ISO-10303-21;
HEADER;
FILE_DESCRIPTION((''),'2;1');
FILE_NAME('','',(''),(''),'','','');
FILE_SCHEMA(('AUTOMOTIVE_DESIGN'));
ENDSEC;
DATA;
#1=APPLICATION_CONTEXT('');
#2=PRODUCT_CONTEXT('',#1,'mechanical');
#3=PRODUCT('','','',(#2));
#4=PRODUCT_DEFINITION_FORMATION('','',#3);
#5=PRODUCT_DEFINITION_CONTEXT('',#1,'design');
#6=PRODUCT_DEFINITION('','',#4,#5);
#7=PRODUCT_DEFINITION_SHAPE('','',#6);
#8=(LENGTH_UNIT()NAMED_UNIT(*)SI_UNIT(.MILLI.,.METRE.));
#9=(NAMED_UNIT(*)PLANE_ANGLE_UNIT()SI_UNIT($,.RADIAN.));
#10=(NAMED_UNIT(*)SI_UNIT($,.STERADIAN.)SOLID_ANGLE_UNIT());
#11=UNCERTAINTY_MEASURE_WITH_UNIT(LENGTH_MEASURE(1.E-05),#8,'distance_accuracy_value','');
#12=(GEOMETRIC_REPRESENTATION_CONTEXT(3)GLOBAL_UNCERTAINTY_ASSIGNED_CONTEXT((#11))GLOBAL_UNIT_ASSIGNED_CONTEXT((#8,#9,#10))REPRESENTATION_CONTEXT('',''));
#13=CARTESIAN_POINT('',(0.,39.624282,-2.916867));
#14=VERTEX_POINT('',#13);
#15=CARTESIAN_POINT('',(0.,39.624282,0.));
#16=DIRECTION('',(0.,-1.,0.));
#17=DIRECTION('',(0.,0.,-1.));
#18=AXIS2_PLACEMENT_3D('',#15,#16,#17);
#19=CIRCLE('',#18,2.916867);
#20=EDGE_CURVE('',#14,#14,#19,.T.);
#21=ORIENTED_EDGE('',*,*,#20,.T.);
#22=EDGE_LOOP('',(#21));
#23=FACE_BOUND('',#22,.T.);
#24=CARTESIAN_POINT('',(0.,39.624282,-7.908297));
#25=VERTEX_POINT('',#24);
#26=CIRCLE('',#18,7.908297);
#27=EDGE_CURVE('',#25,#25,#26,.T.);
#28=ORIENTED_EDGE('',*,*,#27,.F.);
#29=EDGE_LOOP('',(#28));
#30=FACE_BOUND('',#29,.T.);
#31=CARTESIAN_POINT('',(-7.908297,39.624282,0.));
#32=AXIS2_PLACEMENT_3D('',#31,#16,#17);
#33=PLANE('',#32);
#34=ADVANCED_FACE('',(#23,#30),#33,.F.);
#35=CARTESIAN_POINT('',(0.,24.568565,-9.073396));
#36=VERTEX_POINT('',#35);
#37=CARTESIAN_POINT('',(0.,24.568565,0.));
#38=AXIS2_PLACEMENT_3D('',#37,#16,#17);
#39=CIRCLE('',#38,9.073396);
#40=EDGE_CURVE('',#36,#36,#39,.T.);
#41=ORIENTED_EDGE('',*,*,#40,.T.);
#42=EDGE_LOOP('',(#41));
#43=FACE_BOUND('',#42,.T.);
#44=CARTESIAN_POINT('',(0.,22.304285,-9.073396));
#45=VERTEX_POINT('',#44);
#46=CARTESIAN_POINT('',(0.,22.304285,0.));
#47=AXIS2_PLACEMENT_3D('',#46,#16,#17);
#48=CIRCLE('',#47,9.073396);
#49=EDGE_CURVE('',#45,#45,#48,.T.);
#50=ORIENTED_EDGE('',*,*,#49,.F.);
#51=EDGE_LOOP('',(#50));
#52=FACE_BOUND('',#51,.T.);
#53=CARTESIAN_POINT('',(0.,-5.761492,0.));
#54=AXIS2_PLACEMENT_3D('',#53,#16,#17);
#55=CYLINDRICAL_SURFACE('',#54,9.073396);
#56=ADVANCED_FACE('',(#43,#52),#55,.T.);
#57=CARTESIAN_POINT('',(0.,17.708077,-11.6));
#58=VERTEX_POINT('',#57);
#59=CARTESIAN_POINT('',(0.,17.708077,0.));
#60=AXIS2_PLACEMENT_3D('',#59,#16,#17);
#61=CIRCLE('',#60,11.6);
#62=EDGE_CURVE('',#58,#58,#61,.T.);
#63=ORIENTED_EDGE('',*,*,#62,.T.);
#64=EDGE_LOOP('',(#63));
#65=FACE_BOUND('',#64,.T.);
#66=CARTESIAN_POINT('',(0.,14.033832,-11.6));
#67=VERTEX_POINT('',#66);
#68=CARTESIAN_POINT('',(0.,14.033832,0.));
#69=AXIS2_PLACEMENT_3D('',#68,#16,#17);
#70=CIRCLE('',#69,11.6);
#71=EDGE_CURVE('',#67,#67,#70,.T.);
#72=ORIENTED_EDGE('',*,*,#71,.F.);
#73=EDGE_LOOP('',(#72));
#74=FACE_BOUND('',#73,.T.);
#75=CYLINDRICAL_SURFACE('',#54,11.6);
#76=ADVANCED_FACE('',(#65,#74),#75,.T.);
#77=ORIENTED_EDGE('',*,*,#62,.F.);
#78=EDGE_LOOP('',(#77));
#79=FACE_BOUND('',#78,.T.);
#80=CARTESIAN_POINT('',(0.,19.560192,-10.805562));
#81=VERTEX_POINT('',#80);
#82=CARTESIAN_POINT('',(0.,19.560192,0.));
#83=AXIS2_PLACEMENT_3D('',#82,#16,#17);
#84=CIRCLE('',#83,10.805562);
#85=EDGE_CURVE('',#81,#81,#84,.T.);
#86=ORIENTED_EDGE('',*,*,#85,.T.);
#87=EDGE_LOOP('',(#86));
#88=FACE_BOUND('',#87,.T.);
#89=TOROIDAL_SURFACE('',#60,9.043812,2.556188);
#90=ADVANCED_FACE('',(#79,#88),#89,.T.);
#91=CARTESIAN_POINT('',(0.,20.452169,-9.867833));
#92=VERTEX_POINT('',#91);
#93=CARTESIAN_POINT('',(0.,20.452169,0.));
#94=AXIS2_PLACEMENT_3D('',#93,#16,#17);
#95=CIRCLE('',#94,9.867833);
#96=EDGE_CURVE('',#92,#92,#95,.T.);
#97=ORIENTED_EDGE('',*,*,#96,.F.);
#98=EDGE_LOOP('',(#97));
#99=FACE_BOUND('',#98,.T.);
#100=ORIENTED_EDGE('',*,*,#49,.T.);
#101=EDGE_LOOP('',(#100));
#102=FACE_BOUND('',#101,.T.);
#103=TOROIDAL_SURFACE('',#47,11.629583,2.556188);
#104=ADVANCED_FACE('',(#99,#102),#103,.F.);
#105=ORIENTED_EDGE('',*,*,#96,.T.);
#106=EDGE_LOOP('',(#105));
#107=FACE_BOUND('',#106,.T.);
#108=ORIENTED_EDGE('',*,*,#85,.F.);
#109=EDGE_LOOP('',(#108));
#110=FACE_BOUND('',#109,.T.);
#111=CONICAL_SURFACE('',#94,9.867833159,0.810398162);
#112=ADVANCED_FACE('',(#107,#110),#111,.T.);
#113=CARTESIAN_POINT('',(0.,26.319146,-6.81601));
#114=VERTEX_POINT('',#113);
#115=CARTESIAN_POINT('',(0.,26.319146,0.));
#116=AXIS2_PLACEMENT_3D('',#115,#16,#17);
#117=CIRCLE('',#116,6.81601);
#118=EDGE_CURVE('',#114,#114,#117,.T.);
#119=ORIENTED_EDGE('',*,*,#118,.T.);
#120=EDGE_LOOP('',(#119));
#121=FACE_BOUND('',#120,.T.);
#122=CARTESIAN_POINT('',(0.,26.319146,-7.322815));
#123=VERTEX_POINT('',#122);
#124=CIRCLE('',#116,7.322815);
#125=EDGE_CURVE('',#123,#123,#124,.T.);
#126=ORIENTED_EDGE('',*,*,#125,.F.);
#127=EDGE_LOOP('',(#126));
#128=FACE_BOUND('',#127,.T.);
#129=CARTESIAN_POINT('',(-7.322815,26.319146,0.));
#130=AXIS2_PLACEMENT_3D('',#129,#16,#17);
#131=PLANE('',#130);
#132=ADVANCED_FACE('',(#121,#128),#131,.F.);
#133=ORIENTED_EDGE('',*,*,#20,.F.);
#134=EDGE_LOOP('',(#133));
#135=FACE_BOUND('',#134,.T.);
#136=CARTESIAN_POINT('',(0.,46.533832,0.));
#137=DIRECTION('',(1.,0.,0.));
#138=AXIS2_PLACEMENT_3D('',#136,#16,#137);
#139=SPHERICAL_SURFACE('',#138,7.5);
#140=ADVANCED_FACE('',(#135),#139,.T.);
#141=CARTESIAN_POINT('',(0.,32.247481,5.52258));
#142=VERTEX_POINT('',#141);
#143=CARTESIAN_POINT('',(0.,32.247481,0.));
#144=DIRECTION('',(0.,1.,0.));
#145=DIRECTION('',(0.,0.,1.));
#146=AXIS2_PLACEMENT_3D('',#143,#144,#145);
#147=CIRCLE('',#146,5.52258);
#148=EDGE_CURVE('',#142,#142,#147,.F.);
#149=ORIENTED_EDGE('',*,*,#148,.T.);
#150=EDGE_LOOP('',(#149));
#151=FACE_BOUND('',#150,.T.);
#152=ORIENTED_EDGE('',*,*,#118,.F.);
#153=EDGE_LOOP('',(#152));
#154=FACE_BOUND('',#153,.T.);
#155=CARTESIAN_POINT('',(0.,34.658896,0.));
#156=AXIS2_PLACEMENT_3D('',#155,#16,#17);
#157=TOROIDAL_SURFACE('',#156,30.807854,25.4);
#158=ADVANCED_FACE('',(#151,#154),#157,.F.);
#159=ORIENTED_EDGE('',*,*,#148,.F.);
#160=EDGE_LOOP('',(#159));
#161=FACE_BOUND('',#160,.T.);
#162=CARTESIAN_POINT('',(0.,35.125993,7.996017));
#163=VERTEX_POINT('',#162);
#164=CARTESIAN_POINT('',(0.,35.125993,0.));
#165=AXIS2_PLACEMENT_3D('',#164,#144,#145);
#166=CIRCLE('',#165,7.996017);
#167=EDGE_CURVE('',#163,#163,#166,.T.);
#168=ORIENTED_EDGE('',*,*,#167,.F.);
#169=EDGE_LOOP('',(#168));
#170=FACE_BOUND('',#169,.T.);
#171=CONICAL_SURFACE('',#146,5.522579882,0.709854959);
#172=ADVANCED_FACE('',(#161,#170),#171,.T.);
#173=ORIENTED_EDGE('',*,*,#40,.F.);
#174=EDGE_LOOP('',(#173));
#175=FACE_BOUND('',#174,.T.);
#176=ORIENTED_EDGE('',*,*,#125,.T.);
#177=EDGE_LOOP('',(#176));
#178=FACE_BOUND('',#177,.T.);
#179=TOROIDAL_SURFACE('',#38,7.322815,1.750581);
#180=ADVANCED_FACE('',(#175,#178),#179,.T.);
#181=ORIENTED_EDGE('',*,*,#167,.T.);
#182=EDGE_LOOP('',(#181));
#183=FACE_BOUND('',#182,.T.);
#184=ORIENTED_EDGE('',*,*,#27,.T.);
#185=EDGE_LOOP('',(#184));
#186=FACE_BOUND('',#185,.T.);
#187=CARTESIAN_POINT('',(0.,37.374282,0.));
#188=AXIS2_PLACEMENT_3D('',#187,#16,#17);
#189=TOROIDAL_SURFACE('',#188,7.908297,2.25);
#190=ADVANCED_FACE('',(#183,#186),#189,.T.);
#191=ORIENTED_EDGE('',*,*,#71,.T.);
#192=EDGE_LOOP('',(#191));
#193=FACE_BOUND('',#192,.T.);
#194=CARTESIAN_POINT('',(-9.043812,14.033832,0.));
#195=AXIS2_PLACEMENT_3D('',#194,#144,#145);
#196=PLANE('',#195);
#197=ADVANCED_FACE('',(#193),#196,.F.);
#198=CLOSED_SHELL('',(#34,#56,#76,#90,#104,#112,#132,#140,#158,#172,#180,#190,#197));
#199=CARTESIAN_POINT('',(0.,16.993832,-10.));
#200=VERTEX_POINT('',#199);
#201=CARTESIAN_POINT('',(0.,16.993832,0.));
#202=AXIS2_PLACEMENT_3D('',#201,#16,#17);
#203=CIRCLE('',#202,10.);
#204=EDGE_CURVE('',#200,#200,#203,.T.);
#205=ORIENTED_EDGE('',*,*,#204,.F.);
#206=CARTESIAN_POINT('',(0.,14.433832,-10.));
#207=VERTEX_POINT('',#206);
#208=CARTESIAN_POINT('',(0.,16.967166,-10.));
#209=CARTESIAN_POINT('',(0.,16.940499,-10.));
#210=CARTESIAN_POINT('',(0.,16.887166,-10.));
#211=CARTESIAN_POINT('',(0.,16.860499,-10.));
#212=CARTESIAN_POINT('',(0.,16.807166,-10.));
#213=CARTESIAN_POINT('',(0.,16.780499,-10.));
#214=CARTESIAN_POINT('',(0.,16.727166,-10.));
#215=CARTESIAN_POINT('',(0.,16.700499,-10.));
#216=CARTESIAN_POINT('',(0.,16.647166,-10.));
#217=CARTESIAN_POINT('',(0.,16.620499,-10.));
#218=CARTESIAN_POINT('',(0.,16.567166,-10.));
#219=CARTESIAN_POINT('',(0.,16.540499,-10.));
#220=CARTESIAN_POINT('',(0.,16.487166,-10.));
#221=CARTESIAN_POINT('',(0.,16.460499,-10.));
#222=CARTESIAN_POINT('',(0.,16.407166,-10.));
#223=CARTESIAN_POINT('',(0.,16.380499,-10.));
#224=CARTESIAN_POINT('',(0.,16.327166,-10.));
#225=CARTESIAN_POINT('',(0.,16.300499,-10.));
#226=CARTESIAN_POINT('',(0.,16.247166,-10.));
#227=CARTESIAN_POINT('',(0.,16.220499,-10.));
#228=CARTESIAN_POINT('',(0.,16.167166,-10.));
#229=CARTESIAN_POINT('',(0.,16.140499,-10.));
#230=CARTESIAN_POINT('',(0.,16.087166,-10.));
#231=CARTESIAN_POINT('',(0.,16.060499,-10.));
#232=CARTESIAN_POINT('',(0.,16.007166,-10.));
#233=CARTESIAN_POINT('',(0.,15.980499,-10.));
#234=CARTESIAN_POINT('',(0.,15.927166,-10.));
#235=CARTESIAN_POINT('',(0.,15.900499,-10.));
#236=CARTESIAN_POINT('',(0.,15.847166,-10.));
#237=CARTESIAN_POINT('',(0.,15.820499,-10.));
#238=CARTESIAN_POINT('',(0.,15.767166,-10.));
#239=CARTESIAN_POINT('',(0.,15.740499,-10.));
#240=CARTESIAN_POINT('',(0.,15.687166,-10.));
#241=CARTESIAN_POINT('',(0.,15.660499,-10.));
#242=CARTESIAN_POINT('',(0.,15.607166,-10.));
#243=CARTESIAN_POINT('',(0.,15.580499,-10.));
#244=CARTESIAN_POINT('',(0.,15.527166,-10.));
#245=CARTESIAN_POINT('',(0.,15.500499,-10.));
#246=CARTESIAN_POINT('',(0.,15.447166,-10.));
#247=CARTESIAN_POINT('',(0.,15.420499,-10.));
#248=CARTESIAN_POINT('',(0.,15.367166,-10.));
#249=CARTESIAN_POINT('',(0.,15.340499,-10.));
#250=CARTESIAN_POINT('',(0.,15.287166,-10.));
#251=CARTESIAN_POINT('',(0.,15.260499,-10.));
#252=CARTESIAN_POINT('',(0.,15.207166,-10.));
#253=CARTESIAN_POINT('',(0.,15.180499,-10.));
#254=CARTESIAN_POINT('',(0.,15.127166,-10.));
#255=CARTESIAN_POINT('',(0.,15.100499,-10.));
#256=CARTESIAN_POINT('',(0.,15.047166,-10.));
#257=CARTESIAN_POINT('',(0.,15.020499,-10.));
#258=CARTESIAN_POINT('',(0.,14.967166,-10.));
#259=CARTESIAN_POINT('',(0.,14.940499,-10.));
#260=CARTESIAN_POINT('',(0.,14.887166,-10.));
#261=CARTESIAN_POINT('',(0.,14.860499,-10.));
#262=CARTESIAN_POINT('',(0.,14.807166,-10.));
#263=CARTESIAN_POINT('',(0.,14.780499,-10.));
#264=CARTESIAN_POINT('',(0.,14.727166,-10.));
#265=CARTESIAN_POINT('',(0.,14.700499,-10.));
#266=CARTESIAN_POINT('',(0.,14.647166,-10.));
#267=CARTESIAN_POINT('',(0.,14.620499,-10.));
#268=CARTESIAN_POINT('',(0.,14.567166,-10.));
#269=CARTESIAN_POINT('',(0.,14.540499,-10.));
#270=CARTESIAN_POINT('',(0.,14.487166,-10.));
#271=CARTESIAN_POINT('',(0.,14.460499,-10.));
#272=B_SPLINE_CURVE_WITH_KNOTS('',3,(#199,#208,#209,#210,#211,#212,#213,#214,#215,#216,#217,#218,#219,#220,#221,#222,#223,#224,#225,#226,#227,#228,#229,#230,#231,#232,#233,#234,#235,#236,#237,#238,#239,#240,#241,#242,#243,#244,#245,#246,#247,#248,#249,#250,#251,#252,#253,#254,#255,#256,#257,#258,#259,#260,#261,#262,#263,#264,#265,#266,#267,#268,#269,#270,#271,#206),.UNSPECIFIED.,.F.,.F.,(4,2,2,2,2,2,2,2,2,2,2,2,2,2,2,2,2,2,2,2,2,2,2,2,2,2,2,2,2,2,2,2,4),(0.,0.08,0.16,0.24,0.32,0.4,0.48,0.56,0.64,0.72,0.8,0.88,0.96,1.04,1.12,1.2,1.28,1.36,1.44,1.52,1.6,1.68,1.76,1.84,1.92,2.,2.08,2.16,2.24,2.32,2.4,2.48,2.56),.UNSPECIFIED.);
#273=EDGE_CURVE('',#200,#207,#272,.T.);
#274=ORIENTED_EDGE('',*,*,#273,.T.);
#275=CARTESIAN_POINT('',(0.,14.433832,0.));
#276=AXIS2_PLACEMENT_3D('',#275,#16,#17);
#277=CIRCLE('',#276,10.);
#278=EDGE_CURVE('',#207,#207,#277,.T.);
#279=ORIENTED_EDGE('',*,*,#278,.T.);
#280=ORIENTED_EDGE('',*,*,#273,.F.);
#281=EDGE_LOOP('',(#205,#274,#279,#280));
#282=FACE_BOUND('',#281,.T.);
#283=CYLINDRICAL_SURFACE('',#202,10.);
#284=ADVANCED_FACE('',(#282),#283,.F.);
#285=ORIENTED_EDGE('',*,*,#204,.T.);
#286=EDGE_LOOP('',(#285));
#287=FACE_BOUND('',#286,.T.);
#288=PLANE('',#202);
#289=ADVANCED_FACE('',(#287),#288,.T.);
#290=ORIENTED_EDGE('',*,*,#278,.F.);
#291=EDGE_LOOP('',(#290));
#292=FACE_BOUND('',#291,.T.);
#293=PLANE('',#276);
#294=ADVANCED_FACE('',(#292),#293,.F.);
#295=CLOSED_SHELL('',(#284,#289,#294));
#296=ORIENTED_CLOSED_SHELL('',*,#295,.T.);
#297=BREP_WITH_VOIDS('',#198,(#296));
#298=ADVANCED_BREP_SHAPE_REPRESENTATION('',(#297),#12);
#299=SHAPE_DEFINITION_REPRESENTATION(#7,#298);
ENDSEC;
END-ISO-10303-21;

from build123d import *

# Parameters (mm, degrees)
CUT_EXTRUDE1_START = -0.4
SKETCH4_R          = 10
CUT_EXTRUDE1_DEPTH = 2.56


with BuildPart() as part:
    # Sketch1 → Revolve1 (revolve)
    with BuildSketch(Plane.XY, mode=Mode.PRIVATE) as revolve1_sk:
        with BuildLine():
            Line((-11.6, 16.590020296), (-11.6, 17.708076526))
            ThreePointArc((-11.6, 17.708076526), (-11.393009972, 18.715730197), (-10.805562363, 19.560192215))
            Line((-10.805562363, 19.560192215), (-9.867833159, 20.452169234))
            ThreePointArc((-9.867833159, 20.452169234), (-9.28038555, 21.296631251), (-9.073395522, 22.304284923))
            Line((-9.073395522, 22.304284923), (-9.073395522, 24.568565429))
            ThreePointArc((-9.073395522, 24.568565429), (-8.5606623, 25.806412928), (-7.322814801, 26.31914615))
            Line((-7.322814801, 26.31914615), (-6.816009802, 26.31914615))
            ThreePointArc((-6.816009802, 26.31914615), (-5.724674741, 30.659629783), (-5.412117665, 35.124281892))
            Line((-5.412117665, 35.124281892), (-7.908297127, 35.124281892))
            ThreePointArc((-7.908297127, 35.124281892), (-10.158297127, 37.374281892), (-7.908297127, 39.624281892))
            Line((-7.908297127, 39.624281892), (-2.916866685, 39.624281892))
            ThreePointArc((-2.916866685, 39.624281892), (-7.350905696, 48.021846367), (0, 54.033832438))
            Line((0, 54.033832438), (0, 14.033832438))
            Line((0, 14.033832438), (-9.043812142, 14.033832438))
            Line((-9.043812142, 14.033832438), (-11.6, 14.033832438))
            Line((-11.6, 14.033832438), (-11.6, 16.590020296))
        make_face()
    revolve(revolve1_sk.sketch.rotate(Axis((0, -5.761492399, 0), (0, 1, 0)), 270), axis=Axis((0, -5.761492399, 0), (0, 1, 0)))

    # Chamfer1: read off the stored shape, not the designer's step
    # Chamfer1: loft between two sections, ruled curve by curve
    chamfer1_from = [
        Edge.make_three_point_arc((0, 32.247480775, 5.522579882), (5.522579882, 32.247480775, 0), (0, 32.247480775, -5.522579882)),
        Edge.make_three_point_arc((0, 32.247480775, -5.522579882), (-5.522579882, 32.247480775, 0), (0, 32.247480775, 5.522579882)),
    ]
    chamfer1_to = [
        Edge.make_three_point_arc((0, 35.125992507, 7.996017369), (7.996017369, 35.125992507, 0), (0, 35.125992507, -7.996017369)),
        Edge.make_three_point_arc((0, 35.125992507, -7.996017369), (-7.996017369, 35.125992507, 0), (0, 35.125992507, 7.996017369)),
    ]
    chamfer1 = Solid(Shell([*[Face.make_surface_from_curves(chamfer1_from[k], chamfer1_to[k]) for k in range(2)], Face(Wire(chamfer1_from)), Face(Wire(chamfer1_to))]))
    add(chamfer1)

    # Sketch4 → Cut-Extrude1 (cut)
    with BuildSketch(Plane.XZ.offset(-14.033832438).offset(CUT_EXTRUDE1_START)):
        with Locations(Location((0, 0, 0), (0, 0, 270))):
            Circle(SKETCH4_R)
    extrude(amount=-CUT_EXTRUDE1_DEPTH, mode=Mode.SUBTRACT)


solid = part.part
